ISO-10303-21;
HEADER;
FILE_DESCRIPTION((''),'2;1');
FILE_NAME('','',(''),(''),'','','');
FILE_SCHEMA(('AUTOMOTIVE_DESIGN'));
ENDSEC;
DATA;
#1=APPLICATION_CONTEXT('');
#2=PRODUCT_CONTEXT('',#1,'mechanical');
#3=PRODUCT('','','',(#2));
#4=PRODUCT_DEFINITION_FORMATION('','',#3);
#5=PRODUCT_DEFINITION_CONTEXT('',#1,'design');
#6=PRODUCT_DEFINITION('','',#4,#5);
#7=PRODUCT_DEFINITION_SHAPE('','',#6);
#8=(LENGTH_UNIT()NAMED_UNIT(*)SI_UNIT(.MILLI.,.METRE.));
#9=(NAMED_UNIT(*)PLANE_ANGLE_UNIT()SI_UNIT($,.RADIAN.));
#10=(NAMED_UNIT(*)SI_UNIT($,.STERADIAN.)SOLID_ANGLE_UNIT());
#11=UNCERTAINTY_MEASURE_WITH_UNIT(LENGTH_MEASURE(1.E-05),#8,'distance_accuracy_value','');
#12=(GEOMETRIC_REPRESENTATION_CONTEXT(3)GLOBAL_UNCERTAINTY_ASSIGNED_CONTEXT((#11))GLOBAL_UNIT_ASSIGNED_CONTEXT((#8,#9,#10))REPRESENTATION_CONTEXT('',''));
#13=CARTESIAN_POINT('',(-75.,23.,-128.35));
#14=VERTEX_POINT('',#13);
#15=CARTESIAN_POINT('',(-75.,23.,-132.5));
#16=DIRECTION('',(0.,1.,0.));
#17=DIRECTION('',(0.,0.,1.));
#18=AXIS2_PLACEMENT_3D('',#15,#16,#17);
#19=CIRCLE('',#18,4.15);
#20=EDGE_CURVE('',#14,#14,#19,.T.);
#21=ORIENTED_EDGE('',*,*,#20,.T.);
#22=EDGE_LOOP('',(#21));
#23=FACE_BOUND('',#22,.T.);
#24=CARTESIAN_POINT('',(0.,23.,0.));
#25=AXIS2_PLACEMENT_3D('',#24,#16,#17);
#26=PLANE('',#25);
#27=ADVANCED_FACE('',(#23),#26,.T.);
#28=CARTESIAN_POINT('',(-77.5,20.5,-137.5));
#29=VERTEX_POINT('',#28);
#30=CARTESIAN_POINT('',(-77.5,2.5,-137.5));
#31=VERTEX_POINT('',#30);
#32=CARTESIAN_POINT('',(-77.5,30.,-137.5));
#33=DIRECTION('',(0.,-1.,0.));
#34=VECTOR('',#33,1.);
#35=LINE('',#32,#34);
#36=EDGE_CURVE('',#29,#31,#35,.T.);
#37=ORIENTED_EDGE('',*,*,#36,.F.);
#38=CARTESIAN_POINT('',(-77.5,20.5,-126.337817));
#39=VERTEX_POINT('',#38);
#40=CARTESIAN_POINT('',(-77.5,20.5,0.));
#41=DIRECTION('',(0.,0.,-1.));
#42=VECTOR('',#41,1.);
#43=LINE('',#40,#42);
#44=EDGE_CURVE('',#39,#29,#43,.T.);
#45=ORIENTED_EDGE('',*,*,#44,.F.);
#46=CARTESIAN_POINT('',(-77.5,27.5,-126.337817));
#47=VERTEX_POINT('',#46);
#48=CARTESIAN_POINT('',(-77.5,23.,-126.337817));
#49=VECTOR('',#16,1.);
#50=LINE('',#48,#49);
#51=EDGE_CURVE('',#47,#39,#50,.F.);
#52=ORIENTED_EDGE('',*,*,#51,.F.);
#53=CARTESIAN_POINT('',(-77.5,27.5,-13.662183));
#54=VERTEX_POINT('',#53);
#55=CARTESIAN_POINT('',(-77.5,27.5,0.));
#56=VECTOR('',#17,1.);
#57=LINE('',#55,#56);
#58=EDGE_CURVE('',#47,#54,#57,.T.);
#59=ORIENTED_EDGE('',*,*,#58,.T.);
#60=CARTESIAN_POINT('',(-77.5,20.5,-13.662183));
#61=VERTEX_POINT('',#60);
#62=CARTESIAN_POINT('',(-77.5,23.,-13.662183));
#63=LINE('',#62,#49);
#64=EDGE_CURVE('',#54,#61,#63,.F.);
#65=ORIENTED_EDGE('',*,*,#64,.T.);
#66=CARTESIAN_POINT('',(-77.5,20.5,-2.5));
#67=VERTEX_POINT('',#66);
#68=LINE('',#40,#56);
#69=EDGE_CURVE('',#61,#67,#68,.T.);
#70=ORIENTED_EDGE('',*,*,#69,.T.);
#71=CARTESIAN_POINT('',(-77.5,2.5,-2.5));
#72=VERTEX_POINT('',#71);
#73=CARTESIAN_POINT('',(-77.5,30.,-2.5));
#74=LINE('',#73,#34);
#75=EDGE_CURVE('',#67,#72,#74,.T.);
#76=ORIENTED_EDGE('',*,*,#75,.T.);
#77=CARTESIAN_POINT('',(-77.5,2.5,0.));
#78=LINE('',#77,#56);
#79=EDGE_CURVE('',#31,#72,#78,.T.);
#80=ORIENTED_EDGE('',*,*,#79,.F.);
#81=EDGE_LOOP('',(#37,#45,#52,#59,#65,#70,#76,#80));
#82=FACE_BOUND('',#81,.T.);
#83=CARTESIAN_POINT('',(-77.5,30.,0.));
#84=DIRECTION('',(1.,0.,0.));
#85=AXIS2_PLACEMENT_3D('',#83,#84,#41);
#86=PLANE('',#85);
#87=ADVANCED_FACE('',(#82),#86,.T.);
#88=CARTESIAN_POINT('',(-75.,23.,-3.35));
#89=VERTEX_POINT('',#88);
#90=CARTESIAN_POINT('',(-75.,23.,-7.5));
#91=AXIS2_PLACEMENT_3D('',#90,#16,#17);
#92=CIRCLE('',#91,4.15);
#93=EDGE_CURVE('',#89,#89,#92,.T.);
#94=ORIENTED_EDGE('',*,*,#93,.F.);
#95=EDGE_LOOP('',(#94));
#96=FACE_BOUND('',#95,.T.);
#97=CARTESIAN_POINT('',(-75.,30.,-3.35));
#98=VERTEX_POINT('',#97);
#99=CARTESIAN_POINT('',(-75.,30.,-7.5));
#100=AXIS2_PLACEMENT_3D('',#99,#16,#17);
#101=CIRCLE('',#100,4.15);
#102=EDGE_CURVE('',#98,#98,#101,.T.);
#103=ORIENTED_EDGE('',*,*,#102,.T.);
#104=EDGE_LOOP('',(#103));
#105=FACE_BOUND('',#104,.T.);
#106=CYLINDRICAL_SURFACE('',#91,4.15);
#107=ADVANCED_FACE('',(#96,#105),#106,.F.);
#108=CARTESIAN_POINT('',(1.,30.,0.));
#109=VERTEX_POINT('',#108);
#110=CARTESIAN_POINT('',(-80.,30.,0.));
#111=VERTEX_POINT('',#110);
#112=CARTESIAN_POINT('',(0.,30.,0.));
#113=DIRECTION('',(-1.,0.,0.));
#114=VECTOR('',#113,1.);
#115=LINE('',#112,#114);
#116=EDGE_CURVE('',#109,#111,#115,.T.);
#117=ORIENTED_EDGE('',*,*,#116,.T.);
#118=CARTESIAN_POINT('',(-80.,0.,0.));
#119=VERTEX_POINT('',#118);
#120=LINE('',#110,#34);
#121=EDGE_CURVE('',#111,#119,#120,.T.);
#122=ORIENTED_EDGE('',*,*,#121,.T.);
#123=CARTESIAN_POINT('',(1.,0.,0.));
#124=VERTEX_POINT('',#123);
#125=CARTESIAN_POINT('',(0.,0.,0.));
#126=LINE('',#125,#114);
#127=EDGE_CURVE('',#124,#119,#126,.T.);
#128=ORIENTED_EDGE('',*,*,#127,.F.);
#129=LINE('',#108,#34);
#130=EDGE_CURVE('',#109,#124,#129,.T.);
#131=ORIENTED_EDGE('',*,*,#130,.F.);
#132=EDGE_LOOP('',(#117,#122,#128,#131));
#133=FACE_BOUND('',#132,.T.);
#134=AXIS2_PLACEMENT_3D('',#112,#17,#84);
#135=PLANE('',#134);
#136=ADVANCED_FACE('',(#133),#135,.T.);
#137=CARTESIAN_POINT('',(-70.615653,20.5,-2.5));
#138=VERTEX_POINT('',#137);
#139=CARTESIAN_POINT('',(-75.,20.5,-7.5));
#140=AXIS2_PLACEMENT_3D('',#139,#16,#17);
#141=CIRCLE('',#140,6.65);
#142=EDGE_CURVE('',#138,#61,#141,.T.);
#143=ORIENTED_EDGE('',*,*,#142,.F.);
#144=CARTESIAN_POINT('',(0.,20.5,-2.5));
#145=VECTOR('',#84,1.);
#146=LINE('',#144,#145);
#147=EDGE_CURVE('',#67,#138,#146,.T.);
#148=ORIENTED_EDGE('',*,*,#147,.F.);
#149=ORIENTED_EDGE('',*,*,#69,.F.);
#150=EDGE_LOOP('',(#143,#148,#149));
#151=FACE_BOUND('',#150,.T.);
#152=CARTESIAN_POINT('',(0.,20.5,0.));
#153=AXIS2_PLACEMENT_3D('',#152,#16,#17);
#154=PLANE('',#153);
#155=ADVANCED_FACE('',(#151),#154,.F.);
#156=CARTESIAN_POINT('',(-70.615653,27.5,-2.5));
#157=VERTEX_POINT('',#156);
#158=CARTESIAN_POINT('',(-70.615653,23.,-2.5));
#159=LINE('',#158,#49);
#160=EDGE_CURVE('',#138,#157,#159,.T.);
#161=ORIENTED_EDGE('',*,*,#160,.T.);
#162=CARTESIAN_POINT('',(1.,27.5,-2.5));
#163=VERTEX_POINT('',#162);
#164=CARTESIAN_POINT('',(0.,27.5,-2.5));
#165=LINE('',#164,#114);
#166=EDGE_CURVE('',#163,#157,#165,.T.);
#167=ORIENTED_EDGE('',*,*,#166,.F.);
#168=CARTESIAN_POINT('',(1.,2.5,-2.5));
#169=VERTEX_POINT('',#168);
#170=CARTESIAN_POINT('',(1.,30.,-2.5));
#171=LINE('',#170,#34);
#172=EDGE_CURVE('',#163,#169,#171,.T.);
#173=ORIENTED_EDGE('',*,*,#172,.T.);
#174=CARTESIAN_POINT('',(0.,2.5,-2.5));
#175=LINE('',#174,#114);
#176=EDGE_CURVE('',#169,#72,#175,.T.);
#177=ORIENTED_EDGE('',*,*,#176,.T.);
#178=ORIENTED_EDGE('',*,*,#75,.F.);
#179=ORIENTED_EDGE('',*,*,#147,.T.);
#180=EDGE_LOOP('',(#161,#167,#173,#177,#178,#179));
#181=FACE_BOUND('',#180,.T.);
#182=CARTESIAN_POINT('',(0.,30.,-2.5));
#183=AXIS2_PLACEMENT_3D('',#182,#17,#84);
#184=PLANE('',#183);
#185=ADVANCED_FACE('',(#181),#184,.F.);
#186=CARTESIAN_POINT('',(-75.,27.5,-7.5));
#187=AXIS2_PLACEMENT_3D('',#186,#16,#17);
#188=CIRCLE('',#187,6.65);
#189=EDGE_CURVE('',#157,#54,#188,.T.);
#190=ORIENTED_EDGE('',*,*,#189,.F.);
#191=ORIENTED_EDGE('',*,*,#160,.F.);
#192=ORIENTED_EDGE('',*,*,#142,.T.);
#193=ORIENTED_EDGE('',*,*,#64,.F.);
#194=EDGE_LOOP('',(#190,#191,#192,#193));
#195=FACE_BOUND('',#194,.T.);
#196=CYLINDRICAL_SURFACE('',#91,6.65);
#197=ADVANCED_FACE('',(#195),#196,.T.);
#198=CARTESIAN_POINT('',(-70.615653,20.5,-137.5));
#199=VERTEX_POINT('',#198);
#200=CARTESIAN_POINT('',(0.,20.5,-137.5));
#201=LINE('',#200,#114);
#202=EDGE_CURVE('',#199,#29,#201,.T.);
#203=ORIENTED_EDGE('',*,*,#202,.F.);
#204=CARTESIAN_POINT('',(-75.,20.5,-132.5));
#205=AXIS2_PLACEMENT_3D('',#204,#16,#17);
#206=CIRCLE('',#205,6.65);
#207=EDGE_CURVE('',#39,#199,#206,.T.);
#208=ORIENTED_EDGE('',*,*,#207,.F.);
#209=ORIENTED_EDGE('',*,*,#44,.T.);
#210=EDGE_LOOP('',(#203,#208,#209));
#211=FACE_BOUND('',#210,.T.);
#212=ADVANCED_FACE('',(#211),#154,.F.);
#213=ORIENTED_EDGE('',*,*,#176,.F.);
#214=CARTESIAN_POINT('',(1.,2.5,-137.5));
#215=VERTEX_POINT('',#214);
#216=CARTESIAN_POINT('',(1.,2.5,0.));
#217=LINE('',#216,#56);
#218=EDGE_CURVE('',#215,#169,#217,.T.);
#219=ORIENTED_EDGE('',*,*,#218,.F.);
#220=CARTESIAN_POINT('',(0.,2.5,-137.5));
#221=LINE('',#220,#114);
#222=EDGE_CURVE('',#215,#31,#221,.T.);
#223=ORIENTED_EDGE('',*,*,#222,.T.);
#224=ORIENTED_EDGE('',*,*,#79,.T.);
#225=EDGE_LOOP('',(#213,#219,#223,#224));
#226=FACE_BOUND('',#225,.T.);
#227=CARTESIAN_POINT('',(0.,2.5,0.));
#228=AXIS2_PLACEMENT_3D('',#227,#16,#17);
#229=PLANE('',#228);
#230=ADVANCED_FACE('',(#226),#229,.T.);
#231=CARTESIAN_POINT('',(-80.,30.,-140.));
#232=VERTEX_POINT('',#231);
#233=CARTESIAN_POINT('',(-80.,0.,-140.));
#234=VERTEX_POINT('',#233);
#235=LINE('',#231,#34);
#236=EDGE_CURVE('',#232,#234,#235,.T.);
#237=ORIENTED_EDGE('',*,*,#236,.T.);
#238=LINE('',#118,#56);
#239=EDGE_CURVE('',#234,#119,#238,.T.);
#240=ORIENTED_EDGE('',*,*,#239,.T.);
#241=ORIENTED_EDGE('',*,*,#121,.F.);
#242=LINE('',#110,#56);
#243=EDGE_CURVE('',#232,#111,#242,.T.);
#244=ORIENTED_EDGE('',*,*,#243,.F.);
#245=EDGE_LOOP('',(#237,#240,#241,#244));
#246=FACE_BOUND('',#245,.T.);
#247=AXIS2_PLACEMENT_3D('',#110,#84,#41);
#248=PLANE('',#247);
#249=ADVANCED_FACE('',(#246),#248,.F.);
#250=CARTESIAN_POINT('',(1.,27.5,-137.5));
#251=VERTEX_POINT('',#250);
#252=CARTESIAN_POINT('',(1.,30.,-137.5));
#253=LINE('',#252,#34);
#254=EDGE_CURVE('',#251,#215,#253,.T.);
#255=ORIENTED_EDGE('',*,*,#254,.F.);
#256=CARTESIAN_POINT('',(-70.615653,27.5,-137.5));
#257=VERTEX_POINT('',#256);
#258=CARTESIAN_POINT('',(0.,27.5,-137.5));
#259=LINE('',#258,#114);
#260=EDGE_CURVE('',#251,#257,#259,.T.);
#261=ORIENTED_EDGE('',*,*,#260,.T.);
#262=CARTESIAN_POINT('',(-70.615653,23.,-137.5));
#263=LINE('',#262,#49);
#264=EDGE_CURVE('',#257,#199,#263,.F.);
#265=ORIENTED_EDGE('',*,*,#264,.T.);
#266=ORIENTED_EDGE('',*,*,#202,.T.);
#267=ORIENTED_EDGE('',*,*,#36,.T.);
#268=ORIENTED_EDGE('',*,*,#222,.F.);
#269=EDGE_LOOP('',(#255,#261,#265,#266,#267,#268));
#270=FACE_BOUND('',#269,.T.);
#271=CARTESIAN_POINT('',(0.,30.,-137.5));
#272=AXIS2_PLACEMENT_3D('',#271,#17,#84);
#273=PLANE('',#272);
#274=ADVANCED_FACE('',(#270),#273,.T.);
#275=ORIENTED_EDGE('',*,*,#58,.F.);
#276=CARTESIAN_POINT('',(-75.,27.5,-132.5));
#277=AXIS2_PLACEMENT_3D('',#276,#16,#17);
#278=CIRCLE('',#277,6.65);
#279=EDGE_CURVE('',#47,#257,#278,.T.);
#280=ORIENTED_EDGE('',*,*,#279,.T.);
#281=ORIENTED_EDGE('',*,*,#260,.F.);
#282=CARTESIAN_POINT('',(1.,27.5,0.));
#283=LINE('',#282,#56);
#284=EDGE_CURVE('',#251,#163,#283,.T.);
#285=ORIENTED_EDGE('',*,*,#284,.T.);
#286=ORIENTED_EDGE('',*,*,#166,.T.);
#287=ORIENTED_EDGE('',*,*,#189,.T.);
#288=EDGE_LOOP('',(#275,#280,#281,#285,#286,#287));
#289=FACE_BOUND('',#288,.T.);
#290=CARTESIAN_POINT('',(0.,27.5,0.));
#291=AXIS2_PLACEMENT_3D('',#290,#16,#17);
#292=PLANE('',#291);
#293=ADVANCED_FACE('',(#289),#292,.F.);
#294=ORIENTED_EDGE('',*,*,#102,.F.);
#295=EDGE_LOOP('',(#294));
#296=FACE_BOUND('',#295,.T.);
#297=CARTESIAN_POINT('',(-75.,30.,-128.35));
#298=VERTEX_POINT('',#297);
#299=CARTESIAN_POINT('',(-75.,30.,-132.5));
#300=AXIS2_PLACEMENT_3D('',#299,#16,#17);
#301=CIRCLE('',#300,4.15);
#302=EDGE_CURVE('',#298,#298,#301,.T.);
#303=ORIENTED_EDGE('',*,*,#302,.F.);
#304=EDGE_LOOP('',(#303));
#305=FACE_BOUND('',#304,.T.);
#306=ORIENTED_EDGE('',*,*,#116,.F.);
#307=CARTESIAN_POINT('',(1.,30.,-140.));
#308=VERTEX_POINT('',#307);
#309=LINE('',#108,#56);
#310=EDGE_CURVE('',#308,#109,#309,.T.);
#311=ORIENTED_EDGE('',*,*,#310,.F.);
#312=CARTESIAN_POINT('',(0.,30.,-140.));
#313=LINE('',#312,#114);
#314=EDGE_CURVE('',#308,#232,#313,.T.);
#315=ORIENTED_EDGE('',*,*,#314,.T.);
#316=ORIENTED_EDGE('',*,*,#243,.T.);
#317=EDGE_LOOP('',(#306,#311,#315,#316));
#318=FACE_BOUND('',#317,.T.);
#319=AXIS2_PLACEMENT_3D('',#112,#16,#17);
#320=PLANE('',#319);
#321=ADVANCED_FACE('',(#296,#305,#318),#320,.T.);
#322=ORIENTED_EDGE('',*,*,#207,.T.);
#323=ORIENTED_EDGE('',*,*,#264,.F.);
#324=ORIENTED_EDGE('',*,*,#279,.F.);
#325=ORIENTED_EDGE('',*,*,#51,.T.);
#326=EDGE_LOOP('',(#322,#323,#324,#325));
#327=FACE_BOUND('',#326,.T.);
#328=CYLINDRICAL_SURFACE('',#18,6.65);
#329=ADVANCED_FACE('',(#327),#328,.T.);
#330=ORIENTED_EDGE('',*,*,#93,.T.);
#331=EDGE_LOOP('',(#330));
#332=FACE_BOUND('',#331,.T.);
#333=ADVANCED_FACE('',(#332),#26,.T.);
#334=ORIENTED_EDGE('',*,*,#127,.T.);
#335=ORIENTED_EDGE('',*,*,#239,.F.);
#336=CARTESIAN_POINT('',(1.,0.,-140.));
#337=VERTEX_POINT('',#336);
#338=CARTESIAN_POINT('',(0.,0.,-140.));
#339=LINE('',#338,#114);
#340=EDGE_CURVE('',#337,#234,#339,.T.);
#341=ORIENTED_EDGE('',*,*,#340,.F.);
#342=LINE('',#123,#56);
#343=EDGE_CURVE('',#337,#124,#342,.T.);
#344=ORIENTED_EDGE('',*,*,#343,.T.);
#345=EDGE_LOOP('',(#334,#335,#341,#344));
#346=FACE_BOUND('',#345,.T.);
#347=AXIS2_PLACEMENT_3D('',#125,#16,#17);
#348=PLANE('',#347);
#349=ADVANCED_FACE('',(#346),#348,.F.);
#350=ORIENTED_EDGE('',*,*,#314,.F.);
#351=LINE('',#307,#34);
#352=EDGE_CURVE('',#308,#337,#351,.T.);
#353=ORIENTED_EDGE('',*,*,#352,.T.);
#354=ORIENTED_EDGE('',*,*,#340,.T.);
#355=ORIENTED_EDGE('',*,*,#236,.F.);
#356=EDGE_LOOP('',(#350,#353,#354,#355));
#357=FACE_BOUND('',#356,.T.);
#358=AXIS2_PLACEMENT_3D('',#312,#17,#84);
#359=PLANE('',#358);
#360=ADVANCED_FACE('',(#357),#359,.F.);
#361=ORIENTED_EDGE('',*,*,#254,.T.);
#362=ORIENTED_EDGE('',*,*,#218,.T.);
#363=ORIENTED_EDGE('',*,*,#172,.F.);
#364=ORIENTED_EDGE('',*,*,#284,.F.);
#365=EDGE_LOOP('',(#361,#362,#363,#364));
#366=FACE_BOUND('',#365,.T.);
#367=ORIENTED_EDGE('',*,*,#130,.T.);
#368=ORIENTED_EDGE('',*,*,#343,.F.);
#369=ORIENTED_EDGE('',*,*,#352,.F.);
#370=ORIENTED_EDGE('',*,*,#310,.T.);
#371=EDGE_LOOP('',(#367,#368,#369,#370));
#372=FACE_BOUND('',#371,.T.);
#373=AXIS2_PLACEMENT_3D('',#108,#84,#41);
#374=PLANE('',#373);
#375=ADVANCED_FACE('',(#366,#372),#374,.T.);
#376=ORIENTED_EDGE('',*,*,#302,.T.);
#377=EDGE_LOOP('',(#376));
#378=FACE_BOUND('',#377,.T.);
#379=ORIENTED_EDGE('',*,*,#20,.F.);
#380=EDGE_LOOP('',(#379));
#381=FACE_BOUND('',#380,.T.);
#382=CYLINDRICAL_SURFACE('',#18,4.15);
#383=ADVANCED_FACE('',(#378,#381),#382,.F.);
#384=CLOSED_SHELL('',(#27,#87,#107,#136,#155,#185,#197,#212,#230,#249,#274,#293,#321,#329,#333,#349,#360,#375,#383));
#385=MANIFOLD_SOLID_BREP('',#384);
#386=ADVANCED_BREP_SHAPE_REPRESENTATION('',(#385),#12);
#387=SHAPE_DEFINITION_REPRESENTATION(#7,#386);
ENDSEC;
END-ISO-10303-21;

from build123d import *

# Parameters (mm, degrees)
SKETCH1_W           = 81
SKETCH1_H           = 140
BOSS_EXTRUDE2_DEPTH = 30
SKETCH3_R           = 4.15
CUT_EXTRUDE2_DEPTH  = 7
SHELL1_START        = 2.5
SHELL1_DEPTH        = 25
SHELL1_2_DEPTH      = 18


# Read off the part's stored shape, not the designer's step: Shell1
with BuildPart() as part:
    # Sketch1 → Boss-Extrude2 (new body)
    with BuildSketch(Plane(origin=(0, 0, 0), x_dir=(1, 0, 0), z_dir=(0, 1, 0))):
        with Locations((-39.5, 70)):
            Rectangle(SKETCH1_W, SKETCH1_H)
    extrude(amount=BOSS_EXTRUDE2_DEPTH)

    # Sketch3 → Cut-Extrude2 (cut)
    with BuildSketch(Plane(origin=(0, 30, 0), x_dir=(1, 0, 0), z_dir=(0, 1, 0))):
        with Locations(Location((-75, 7.5, 0), (0, 0, 270))):
            Circle(SKETCH3_R)
        with Locations(Location((-75, 132.5, 0), (0, 0, 270))):
            Circle(SKETCH3_R)
    extrude(amount=-CUT_EXTRUDE2_DEPTH, mode=Mode.SUBTRACT)

    # Shell1 outline → Shell1 (cut)
    with BuildSketch(Plane(origin=(0, 0, 0), x_dir=(1, 0, 0), z_dir=(0, 1, 0)).offset(SHELL1_START)):
        with BuildLine():
            Line((1, 137.5), (-70.615652842, 137.5))
            ThreePointArc((-70.615652842, 137.5), (-69.339940487, 129.009122415), (-77.5, 126.337816945))
            Line((-77.5, 126.337816945), (-77.5, 13.662183055))
            ThreePointArc((-77.5, 13.662183055), (-69.339940487, 10.990877585), (-70.615652842, 2.5))
            Line((-70.615652842, 2.5), (1, 2.5))
            Line((1, 2.5), (1, 137.5))
        make_face()
    extrude(amount=SHELL1_DEPTH, mode=Mode.SUBTRACT)

    # Shell1 2 outline → Shell1 2 (cut)
    with BuildSketch(Plane(origin=(0, 0, 0), x_dir=(1, 0, 0), z_dir=(0, 1, 0)).offset(SHELL1_START)):
        with BuildLine():
            Line((-70.615652842, 137.5), (-77.5, 137.5))
            Line((-77.5, 137.5), (-77.5, 126.337816945))
            ThreePointArc((-77.5, 126.337816945), (-69.339940487, 129.009122415), (-70.615652842, 137.5))
        make_face()
        with BuildLine():
            ThreePointArc((-70.615652842, 2.5), (-69.339940487, 10.990877585), (-77.5, 13.662183055))
            Line((-77.5, 13.662183055), (-77.5, 2.5))
            Line((-77.5, 2.5), (-70.615652842, 2.5))
        make_face()
    extrude(amount=SHELL1_2_DEPTH, mode=Mode.SUBTRACT)


solid = part.part
